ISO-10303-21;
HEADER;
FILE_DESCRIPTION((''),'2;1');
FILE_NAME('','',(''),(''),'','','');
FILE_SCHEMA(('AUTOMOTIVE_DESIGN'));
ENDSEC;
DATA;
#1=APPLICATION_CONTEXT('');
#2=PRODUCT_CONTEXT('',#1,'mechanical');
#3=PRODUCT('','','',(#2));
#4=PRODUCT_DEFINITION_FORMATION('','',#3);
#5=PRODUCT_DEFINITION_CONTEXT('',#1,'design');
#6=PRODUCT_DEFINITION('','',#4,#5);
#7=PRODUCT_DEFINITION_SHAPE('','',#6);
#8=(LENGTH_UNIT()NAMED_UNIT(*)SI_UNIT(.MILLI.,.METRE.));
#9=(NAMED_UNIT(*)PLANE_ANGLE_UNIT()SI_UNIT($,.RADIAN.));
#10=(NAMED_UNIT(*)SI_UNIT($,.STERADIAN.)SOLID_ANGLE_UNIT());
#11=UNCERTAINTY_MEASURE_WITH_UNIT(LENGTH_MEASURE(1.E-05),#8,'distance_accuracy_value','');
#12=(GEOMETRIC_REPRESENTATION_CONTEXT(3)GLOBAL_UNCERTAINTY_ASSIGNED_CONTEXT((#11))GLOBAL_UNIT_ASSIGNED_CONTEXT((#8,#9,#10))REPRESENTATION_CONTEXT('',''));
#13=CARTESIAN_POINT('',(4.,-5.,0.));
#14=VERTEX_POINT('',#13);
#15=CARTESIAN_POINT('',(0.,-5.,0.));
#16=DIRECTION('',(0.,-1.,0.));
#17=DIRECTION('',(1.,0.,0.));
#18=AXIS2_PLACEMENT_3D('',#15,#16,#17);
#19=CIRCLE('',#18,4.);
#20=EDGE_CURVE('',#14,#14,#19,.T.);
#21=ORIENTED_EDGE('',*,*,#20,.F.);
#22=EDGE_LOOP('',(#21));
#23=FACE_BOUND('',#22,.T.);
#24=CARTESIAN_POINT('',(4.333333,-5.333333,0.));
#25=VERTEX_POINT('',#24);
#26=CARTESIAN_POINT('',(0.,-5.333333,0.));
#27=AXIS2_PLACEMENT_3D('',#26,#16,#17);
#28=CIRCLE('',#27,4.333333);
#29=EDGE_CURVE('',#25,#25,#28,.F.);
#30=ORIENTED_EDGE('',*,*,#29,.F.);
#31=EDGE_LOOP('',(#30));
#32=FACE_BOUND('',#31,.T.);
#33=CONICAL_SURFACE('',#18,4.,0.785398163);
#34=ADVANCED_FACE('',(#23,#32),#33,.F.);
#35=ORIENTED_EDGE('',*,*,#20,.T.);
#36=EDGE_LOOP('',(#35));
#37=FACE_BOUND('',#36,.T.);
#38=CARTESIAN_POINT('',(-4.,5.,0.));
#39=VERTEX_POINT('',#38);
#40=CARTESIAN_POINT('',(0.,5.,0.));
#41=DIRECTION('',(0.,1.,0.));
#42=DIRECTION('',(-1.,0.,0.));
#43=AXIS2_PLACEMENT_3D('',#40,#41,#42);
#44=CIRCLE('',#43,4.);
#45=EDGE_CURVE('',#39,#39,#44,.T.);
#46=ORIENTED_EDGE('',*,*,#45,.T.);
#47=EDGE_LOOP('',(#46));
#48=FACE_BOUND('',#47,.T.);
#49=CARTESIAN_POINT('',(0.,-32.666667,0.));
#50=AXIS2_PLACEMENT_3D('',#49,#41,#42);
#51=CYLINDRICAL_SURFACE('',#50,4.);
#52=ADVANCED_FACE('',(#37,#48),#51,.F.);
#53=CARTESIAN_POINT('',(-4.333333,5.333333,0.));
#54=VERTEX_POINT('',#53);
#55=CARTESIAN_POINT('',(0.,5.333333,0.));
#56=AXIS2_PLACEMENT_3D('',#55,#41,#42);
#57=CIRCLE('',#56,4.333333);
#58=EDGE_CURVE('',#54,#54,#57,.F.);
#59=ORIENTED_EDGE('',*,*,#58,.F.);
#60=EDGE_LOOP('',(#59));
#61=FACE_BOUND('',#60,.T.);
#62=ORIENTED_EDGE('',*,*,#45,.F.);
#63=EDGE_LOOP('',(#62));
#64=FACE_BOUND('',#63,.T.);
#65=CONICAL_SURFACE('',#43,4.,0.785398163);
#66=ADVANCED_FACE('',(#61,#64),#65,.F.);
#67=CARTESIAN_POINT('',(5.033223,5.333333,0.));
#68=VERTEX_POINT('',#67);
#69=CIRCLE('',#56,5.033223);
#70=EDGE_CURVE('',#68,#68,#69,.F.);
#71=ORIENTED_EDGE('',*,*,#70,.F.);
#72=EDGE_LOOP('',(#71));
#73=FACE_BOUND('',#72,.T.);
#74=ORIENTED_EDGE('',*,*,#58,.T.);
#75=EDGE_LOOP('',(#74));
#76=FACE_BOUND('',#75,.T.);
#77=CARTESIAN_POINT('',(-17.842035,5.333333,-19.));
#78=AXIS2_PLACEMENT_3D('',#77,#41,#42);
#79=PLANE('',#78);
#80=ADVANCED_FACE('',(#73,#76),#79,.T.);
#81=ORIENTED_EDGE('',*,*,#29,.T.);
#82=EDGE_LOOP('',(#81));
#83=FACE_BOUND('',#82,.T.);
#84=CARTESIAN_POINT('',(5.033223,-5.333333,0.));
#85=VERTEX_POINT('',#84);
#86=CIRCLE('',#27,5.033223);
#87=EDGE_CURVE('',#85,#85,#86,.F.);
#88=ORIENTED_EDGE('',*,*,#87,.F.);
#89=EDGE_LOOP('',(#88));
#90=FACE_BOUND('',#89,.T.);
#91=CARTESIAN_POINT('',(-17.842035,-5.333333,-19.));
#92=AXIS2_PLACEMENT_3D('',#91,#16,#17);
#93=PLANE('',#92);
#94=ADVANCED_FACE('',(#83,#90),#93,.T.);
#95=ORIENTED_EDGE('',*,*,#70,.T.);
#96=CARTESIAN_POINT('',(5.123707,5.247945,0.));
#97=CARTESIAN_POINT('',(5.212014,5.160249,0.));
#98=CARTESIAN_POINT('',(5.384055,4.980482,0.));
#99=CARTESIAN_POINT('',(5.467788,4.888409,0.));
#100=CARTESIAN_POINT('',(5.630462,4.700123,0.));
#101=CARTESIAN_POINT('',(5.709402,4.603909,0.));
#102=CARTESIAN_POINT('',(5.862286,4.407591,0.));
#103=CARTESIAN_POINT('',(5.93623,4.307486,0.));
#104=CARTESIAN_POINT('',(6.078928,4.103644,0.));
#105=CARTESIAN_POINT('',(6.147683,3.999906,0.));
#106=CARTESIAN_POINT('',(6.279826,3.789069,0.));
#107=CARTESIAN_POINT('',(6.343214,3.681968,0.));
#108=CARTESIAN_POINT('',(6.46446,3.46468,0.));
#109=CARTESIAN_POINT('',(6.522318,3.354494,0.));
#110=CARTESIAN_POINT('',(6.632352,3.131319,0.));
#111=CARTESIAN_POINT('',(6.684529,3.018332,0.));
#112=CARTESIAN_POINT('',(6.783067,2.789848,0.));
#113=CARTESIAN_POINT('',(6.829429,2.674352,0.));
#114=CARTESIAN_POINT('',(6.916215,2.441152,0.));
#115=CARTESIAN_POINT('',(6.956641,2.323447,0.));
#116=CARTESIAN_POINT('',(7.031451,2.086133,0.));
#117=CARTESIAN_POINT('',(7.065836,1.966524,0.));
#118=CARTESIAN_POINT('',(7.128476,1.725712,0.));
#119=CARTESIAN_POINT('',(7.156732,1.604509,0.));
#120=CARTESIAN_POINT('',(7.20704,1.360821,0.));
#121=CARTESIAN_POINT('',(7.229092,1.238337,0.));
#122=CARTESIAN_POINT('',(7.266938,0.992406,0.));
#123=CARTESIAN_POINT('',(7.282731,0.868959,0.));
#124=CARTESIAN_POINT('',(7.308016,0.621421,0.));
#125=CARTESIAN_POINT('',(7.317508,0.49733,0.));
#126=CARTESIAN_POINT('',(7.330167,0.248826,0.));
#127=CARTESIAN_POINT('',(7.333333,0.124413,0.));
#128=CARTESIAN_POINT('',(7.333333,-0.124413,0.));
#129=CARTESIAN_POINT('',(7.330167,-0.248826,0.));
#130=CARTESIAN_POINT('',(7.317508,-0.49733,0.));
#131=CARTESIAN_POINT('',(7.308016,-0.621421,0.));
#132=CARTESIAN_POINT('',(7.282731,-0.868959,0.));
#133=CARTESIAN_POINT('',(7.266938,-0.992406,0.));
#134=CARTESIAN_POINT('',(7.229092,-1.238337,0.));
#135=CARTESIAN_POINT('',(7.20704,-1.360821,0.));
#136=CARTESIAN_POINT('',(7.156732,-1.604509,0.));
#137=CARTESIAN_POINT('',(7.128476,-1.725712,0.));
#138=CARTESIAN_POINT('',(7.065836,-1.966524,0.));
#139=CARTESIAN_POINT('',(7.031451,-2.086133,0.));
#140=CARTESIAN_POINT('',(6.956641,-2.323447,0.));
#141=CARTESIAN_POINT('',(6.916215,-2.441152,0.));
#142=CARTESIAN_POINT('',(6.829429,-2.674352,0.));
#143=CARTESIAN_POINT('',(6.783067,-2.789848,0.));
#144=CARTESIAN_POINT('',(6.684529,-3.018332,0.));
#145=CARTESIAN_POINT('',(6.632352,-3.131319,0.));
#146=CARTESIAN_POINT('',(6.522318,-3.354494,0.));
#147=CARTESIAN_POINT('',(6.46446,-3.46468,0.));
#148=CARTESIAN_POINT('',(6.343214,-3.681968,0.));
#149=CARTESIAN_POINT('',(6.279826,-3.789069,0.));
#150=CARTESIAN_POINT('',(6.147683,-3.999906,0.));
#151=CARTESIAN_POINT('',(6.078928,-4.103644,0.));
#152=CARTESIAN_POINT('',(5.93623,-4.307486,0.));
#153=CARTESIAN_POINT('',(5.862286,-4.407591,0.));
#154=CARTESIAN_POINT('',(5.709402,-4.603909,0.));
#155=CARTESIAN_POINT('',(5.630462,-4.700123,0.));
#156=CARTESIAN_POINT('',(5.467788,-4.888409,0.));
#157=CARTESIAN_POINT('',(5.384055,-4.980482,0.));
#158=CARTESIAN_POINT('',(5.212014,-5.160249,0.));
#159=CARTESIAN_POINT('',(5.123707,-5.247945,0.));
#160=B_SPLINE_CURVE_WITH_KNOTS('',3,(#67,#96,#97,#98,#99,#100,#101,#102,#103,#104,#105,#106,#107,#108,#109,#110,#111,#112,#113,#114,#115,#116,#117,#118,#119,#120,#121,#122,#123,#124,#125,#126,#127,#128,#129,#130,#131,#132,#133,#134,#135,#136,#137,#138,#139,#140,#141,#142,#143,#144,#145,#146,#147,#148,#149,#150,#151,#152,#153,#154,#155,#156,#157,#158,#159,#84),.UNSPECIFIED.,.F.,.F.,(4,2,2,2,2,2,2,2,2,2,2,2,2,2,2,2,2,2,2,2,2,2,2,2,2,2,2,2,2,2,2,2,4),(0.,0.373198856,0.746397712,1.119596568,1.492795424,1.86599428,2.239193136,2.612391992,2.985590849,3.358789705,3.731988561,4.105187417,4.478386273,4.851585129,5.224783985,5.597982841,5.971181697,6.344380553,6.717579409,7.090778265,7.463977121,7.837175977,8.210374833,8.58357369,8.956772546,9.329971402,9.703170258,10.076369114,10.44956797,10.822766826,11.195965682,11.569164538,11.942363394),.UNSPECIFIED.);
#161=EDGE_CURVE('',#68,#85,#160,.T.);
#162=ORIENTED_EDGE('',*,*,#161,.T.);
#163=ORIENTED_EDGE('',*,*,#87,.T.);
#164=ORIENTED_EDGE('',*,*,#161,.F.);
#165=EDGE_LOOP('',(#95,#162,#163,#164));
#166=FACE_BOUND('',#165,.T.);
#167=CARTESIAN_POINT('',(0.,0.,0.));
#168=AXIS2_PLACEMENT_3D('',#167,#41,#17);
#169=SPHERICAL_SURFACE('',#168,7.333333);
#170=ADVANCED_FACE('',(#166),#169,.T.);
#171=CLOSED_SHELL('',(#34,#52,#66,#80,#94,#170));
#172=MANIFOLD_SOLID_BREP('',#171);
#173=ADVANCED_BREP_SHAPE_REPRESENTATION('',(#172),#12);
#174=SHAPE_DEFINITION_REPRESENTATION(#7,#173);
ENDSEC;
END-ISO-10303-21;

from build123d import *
from build123d.topology import SkipClean

# Parameters (mm, degrees)
CUT_EXTRUDE1_START     = -7.549834435
CUT_EXTRUDE1_OUTLINE_W = 18
CUT_EXTRUDE1_OUTLINE_H = 4
CUT_EXTRUDE1_DEPTH     = 15.09966887
SKETCH3_R              = 6
CUT_EXTRUDE2_DEPTH     = 57
CHAMFER1_SIZE          = 0.5
SCALE1_SCALE           = 0.666666667


# Read off the part's stored shape, not the designer's step: Cut-Extrude1
with BuildPart() as part:
    # Sketch1 → Revolve1 (revolve)
    with SkipClean():  # the faces are left unmerged after this step: merging them gives an invalid solid
        with BuildSketch(Plane.XY):
            with BuildLine():
                ThreePointArc((11, 0), (7.778174593, 7.778174593), (0, 11))
                Line((0, 11), (0, -11))
                ThreePointArc((0, -11), (7.778174593, -7.778174593), (11, 0))
            make_face()
            with BuildLine():
                Line((0, -11), (0, 11))
                ThreePointArc((0, 11), (-11, 0), (0, -11))
            make_face()
        revolve(axis=Axis((0, 11, 0), (0, -1, 0)))

    # Cut-Extrude1 outline → Cut-Extrude1 (cut)
    with BuildSketch(Plane.XY.offset(CUT_EXTRUDE1_START)):
        with Locations((0, 10)):
            Rectangle(CUT_EXTRUDE1_OUTLINE_W, CUT_EXTRUDE1_OUTLINE_H)
        with Locations((0, -10)):
            Rectangle(CUT_EXTRUDE1_OUTLINE_W, CUT_EXTRUDE1_OUTLINE_H)
    extrude(amount=CUT_EXTRUDE1_DEPTH, mode=Mode.SUBTRACT)

    # Sketch3 → Cut-Extrude2 (cut)
    with BuildSketch(Plane(origin=(0, 8, 0), x_dir=(1, 0, 0), z_dir=(0, 1, 0))):
        with Locations(Location((0, 0, 0), (0, 0, 180))):
            Circle(SKETCH3_R)
    extrude(amount=-CUT_EXTRUDE2_DEPTH, mode=Mode.SUBTRACT)

    # Chamfer1
    chamfer1_edges = [part.edges().sort_by_distance(p)[0] for p in [
        (6, -8, 0),
        (6, 8, 0),
    ]]
    chamfer(chamfer1_edges, length=CHAMFER1_SIZE)


with BuildPart() as part_1:
    # Scale1: scaled about (0, 0, 0)
    add(part.part.scale(SCALE1_SCALE))


solid = part_1.part
